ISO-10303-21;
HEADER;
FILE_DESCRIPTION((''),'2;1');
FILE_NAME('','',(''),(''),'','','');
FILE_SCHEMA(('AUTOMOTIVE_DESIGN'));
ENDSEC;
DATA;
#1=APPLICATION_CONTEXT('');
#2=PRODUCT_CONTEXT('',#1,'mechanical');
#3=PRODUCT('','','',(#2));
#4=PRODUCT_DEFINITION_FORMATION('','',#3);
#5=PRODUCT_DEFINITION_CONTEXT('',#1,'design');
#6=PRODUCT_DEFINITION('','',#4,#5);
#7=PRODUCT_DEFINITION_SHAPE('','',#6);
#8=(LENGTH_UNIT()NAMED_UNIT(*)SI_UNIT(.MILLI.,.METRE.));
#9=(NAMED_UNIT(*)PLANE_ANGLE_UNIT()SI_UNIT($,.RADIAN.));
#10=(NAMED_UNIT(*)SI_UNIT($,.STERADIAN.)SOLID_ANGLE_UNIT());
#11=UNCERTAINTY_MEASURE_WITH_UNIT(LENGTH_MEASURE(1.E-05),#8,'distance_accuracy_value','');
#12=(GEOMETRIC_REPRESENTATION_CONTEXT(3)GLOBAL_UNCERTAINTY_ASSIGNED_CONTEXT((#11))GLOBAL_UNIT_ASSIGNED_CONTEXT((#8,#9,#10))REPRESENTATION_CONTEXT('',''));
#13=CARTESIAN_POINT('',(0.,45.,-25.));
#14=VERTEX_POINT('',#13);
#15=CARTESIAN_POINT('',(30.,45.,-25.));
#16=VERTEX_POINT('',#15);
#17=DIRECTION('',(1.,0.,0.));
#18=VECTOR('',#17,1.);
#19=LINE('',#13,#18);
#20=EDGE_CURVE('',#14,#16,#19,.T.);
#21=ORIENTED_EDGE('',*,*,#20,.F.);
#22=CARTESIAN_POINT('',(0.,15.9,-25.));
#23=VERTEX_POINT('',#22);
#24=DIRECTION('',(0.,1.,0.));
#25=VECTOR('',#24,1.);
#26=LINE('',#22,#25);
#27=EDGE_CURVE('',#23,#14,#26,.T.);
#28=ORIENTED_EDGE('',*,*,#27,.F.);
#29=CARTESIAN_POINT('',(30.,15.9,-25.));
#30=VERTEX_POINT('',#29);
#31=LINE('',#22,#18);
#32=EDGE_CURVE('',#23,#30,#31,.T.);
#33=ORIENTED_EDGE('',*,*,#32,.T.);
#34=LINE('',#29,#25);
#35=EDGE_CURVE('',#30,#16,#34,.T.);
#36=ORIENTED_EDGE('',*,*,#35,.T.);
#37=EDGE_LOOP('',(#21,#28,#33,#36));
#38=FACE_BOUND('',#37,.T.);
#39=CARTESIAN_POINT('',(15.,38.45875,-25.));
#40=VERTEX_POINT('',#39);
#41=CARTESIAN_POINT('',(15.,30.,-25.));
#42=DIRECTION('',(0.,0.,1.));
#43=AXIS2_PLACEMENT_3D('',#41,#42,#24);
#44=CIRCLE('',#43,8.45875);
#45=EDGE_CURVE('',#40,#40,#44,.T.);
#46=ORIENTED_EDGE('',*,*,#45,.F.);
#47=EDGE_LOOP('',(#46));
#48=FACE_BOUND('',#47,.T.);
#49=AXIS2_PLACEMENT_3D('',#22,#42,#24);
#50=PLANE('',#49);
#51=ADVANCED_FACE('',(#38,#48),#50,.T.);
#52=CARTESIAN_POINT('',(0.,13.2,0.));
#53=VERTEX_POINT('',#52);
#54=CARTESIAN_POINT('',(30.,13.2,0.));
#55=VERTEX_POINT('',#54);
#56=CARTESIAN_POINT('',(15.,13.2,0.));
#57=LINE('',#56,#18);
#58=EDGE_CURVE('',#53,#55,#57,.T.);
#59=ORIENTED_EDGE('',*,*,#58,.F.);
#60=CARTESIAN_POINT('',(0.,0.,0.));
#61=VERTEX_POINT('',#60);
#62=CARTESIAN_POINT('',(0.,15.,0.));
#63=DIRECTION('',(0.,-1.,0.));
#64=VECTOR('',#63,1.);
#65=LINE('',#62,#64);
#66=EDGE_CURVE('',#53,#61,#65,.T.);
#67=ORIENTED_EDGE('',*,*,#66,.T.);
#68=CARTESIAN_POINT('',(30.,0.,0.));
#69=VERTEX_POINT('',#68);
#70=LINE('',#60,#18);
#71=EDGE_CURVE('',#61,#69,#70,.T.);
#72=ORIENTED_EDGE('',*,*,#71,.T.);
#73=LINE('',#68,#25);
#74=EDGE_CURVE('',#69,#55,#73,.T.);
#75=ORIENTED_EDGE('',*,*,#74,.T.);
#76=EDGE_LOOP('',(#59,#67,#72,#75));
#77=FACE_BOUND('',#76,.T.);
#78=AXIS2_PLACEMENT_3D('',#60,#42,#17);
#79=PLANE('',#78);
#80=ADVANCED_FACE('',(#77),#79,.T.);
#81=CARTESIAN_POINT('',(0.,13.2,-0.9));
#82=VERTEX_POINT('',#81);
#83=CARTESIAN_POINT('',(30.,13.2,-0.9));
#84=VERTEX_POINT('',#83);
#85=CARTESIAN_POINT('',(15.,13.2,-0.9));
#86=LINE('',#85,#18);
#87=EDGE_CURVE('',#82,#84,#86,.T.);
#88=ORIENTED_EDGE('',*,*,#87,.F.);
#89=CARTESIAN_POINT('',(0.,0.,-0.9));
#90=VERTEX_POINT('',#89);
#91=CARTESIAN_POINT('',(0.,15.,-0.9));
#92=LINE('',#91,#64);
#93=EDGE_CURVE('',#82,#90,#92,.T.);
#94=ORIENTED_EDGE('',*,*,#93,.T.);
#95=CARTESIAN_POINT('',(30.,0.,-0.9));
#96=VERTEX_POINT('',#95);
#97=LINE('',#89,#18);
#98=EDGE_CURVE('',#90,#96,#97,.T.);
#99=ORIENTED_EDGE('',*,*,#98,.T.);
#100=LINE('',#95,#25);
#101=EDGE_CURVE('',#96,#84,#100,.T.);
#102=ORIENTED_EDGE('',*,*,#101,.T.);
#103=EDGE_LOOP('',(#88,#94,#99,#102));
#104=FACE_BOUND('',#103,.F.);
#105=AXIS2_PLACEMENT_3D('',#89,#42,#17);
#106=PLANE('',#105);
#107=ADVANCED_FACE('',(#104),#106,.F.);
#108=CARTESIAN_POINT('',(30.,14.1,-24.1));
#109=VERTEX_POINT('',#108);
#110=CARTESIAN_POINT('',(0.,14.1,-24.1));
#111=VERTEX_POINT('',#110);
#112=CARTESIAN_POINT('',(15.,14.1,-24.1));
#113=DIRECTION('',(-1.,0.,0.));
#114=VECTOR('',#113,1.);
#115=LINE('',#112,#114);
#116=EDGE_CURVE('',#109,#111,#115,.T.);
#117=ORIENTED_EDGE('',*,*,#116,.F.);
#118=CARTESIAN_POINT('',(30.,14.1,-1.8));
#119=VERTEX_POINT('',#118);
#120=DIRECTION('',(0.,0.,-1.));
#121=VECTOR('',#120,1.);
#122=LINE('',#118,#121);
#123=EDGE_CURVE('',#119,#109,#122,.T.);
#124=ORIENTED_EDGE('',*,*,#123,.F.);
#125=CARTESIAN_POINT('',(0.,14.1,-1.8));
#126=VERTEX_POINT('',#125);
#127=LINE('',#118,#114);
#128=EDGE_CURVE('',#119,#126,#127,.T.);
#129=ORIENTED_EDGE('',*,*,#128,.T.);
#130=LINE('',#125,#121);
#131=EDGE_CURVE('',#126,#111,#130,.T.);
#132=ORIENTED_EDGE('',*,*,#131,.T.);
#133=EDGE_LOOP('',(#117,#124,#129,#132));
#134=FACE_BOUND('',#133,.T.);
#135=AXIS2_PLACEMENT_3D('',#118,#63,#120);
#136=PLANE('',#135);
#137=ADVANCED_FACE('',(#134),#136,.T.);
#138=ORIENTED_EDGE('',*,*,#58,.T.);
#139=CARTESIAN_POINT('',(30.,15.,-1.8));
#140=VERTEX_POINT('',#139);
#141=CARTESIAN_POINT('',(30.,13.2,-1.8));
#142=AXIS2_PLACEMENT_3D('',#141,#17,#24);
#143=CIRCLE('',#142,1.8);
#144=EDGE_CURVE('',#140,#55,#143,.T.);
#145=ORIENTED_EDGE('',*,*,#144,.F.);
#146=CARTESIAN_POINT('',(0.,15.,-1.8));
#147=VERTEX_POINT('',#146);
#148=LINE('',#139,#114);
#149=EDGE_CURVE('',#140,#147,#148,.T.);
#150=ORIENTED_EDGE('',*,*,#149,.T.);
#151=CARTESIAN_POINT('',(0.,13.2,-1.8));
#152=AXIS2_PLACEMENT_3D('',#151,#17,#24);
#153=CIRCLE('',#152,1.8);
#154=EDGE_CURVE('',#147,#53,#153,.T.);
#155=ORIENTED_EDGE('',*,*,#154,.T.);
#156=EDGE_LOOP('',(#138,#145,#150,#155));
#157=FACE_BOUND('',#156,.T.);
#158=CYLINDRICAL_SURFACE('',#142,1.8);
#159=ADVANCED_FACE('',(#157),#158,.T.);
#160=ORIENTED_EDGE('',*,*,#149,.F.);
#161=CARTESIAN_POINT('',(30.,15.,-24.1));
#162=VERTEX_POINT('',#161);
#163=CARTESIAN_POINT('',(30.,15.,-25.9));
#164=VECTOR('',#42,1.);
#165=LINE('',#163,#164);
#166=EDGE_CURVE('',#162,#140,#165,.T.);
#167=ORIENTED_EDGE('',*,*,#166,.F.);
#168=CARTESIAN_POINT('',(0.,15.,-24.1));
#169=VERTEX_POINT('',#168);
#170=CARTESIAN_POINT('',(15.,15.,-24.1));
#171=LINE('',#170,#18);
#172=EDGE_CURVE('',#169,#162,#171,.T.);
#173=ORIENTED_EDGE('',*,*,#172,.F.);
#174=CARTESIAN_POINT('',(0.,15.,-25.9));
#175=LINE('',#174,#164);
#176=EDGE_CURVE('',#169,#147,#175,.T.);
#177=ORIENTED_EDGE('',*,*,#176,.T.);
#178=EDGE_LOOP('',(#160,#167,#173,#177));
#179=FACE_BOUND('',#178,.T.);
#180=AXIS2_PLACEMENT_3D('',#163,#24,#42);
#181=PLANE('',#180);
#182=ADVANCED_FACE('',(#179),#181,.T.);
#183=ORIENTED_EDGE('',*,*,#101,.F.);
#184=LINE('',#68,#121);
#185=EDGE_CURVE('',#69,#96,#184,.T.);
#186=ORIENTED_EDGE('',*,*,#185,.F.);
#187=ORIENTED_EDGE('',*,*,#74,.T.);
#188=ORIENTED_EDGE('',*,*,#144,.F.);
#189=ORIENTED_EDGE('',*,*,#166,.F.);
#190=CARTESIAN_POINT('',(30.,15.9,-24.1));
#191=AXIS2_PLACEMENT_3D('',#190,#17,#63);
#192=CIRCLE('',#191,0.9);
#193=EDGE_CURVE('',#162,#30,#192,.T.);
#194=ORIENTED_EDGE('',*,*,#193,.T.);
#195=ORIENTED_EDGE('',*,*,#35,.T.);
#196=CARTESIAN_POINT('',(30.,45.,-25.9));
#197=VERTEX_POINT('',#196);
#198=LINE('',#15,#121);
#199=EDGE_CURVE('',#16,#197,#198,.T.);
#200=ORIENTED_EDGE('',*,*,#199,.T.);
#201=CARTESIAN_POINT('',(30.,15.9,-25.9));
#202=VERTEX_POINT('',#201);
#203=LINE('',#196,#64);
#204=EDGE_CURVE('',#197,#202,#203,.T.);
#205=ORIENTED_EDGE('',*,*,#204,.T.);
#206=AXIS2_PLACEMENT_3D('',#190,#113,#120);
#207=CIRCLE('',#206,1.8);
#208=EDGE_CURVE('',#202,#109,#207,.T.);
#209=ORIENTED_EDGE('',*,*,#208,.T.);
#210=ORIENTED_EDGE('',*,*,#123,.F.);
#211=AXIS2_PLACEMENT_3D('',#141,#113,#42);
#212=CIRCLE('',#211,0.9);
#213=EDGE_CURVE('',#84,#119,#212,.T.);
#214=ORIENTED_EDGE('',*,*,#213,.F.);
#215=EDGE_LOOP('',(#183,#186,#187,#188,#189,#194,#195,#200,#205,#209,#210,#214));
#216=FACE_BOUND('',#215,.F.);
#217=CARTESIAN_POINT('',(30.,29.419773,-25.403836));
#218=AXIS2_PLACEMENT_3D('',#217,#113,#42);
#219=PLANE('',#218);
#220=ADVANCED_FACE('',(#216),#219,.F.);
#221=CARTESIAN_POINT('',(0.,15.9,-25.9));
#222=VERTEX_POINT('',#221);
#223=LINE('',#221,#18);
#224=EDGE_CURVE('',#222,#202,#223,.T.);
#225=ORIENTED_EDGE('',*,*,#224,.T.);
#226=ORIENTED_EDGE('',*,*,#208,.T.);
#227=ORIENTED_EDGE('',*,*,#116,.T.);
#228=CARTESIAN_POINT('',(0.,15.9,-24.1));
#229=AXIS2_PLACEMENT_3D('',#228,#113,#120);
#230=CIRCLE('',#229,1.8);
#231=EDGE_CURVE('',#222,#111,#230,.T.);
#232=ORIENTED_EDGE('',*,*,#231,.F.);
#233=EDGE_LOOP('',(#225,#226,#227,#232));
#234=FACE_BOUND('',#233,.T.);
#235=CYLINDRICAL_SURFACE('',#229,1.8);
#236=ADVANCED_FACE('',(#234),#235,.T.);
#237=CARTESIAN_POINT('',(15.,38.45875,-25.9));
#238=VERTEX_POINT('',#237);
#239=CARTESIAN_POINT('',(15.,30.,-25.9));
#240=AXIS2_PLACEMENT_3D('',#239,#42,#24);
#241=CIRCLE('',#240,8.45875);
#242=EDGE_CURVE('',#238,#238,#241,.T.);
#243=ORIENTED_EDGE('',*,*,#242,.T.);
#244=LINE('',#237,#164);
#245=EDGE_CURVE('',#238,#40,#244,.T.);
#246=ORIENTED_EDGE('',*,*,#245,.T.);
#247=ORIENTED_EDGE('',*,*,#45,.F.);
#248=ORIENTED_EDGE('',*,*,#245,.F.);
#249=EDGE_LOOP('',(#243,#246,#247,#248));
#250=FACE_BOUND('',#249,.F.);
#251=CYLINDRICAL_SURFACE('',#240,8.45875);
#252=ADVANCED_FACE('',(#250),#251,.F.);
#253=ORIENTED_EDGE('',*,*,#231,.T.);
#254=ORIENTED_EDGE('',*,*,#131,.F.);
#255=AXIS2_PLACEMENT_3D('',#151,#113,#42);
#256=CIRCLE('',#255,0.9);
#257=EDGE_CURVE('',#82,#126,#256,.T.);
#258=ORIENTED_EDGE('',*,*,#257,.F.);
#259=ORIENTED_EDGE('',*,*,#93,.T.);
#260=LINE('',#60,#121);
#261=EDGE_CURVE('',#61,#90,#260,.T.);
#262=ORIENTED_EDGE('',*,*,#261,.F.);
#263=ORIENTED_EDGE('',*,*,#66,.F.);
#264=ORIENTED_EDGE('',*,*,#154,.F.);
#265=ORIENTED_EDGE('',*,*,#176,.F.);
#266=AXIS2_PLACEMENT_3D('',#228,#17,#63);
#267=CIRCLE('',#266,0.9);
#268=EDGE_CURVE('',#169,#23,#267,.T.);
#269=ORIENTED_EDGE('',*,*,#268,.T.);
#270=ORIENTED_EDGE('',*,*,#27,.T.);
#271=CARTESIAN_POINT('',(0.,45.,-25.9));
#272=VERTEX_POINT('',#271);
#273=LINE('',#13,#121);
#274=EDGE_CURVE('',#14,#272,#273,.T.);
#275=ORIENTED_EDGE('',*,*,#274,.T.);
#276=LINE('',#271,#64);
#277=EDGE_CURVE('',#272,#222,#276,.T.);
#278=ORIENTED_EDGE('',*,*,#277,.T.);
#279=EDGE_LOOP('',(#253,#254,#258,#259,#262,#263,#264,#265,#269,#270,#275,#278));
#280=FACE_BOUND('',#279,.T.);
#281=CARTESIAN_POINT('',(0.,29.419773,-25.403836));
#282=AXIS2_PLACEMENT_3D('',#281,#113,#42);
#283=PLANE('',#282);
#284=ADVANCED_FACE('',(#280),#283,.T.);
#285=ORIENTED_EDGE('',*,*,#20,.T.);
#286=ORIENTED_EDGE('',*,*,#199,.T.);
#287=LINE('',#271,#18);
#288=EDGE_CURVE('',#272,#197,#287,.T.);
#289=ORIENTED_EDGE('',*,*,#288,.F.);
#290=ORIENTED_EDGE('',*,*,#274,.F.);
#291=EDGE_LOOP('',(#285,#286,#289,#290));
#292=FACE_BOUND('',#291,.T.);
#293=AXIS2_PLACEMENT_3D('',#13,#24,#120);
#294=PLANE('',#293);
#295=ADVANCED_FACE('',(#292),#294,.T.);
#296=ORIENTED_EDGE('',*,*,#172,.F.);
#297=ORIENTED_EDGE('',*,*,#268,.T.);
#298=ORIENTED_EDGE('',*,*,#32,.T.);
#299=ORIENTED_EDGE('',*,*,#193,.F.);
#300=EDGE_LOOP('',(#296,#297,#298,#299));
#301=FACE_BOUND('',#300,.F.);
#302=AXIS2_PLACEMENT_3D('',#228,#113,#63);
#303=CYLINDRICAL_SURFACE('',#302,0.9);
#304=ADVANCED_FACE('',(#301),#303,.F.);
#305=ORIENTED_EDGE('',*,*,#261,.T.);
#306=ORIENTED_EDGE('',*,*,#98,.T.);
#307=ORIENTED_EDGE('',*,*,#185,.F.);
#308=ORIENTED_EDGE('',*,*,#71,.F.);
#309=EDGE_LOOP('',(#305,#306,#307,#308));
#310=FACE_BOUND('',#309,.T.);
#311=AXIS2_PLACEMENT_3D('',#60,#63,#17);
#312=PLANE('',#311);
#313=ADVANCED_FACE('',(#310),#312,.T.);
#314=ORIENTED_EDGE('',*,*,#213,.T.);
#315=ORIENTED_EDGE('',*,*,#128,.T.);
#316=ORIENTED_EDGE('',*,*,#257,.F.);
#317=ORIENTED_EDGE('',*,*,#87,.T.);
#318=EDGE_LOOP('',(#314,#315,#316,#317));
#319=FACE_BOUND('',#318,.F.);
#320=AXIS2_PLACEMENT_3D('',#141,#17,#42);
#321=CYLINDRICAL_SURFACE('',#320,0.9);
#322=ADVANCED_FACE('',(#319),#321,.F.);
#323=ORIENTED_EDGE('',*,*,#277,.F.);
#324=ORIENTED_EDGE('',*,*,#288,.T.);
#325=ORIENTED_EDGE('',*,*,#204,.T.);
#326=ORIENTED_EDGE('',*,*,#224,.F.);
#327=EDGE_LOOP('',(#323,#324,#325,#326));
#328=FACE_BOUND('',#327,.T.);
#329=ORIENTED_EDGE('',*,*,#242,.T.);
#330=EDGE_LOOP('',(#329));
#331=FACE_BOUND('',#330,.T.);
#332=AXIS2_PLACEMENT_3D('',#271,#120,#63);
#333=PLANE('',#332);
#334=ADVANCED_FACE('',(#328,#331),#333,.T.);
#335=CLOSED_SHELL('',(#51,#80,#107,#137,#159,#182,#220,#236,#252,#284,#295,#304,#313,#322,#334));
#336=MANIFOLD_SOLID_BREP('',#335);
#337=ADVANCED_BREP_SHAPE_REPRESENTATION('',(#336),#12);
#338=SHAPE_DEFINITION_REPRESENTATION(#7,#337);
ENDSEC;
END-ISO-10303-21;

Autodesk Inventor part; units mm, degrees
ref_plane "YZ Plane" through (0, 0, 0) normal (1, 0, 0) x (0, 1, 0)
ref_plane "XZ Plane" through (0, 0, 0) normal (0, 1, 0) x (-1, 0, 0)
ref_plane "XY Plane" through (0, 0, 0) normal (0, 0, 1) x (1, 0, 0)
sketch "Sketch1" plane through (0, 0, 0) normal (0, 0, 1) x (1, 0, 0)
  line L0 (0, 0) -> (30, 0)
  line L1 (30, 0) -> (30, 15)
  line L2 (30, 15) -> (0, 15)
  line L3 (0, 15) -> (0, 0)
  dimension "d0" = 15
  dimension "d1" = 30
extrude "Plate1" add sketch "Sketch1" against normal blind 0.9
sketch "Sketch2" plane through (30, 14.1, 0) normal (0, 1, 0) x (-1, 0, 0)
  line L0 (30, 0) -> (0, 0)
  line L1 (0, 0) -> (0, -25.9)
  line L2 (0, -25.9) -> (30, -25.9)
  line L3 (30, -25.9) -> (30, 0)
edge flange "Flange1" height 25.9 angle 90 thickness 0.9 bend radius 0.9 thickness toward (0, 1, 0) relief tear relief width 0.9 relief depth 0.45 edges at (15, 15, -0.9) wall of the first edge with corners at (0, 14.1, 0) (30, 14.1, 0) (30, 14.1, -25.9) (0, 14.1, -25.9)
bend "Bend1"
corner "Corner1"
sketch "Sketch3" plane through (0, 14.1, -25) normal (0, 0, -1) x (-1, 0, 0)
  line L0 (-30, 0) -> (0, 0)
  line L1 (0, 0) -> (0, 30.9)
  line L2 (0, 30.9) -> (-30, 30.9)
  line L3 (-30, 30.9) -> (-30, 0)
edge flange "Flange2" height 30.9 angle 90 thickness 0.9 bend radius 0.9 thickness toward (0, 0, -1) relief tear relief width 0.9 relief depth 0.45 edges at (15, 15, -25.9) wall of the first edge with corners at (30, 14.1, -25) (0, 14.1, -25) (0, 45, -25) (30, 45, -25)
bend "Bend2"
corner "Corner2"
sketch "Sketch4" plane through (30, 45, -25.9) normal (0, 0, -1) x (-1, 0, 0)
  line L0 (30, 0) -> (30, -29.1) projected
  line L1 (0, 0) -> (30, 0) projected
  point P0 (30, -45)
  point P1 (15, -15)
  dimension "d23" = 15
  dimension "d24" = 15
hole "Hole1" at (15, 30, -25.9) direction (0, 0, 1) diameter 16.9175 end through all thread size "M18x1" class "6H" standard "ISO Metric profile"
equation "\"d2\" = Thickness"
equation "\"d3\" = BendReliefWidth"
equation "\"d4\" = BendReliefDepth"
equation "\"d5\" = MinimumRemnant"
equation "\"d6\" = TransitionRadius"
equation "\"d9\" = BendRadius"
equation "\"d10\" = CornerReliefSize"
equation "\"d11\" = GapSize"
equation "\"d12\" = JacobiRadiusSize"
equation "\"d13\" = BendReliefWidth"
equation "\"d14\" = BendReliefDepth"
equation "\"d15\" = MinimumRemnant"
equation "\"d16\" = TransitionRadius"
equation "\"d19\" = BendRadius"
equation "\"d20\" = CornerReliefSize"
equation "\"d21\" = GapSize"
equation "\"d22\" = JacobiRadiusSize"
equation "\"d24\" = d23"
equation "\"BendRadius\" = Thickness"
equation "\"BendReliefWidth\" = Thickness"
equation "\"BendReliefDepth\" = 0.5 * Thickness"
equation "\"CornerReliefSize\" = 4 * Thickness"
equation "\"MinimumRemnant\" = 2 * Thickness"
equation "\"TransitionRadius\" = BendRadius"
equation "\"JacobiRadiusSize\" = BendRadius"
equation "\"GapSize\" = Thickness"
equation "\"Thickness\" = 0.9"
properties part number "Soporte Sensor Inductivo"
